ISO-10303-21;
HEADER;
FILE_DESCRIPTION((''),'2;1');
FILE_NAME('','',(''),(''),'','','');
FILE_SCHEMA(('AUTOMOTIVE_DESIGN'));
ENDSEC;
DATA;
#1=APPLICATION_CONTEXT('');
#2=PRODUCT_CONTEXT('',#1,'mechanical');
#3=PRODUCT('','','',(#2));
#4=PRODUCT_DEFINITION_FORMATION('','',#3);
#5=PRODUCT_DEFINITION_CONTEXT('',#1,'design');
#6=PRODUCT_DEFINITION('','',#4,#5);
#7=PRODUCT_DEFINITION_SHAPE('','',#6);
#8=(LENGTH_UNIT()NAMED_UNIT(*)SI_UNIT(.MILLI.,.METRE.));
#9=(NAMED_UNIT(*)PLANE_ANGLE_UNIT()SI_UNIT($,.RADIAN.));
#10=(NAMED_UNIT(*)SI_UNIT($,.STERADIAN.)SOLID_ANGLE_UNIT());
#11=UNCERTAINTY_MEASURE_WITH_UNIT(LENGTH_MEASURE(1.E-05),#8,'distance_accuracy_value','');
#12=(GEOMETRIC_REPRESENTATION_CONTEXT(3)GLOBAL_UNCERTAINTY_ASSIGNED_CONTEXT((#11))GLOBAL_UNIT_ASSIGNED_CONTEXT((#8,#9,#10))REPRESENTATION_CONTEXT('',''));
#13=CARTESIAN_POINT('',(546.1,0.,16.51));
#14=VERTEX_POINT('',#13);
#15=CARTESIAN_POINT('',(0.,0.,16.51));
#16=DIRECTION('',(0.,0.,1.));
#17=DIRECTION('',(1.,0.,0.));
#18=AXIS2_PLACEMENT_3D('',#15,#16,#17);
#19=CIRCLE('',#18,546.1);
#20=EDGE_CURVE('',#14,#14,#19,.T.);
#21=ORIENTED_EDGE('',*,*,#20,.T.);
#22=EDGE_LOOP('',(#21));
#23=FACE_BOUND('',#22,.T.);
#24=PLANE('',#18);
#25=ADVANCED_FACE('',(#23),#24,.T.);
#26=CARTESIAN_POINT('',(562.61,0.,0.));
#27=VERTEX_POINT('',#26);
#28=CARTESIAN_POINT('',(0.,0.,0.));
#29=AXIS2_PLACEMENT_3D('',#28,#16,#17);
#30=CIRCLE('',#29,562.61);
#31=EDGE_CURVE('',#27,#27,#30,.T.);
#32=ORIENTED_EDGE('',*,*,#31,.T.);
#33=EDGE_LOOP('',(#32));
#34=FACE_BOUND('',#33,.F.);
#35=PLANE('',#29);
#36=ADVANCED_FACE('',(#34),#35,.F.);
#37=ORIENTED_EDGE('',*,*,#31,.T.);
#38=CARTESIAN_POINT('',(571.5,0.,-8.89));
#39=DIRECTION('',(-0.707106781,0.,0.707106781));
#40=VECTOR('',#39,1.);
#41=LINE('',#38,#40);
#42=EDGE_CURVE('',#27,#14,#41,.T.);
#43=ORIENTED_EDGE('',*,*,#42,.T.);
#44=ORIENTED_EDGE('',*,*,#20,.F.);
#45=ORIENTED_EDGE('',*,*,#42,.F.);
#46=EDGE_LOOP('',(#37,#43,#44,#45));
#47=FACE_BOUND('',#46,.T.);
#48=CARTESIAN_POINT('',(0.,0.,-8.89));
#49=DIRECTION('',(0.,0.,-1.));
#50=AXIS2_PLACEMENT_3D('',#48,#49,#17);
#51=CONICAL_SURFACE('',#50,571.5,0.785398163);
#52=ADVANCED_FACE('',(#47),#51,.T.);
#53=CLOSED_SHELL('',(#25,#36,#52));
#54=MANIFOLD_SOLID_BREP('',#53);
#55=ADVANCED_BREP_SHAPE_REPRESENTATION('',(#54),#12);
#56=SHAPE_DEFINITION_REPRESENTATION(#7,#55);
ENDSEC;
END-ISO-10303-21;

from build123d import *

# Parameters (mm, degrees)
F0_R     = 571.5
F1_DEPTH = 12.7
F2_DEPTH = 3.81


# Not quite as in the source:
# - a fillet or chamfer that OpenCascade refuses, or shapes differently, is made with other operations: its cross-section is extruded or revolved along the edge and cut away or added


with BuildPart() as f1:
    # F0 (on Top) → F1 (new body)
    with BuildSketch(Plane.XY):
        Circle(F0_R)
    extrude(amount=F1_DEPTH)

    # F2 (add): a face of the model
    f2_faces = [f1.faces().sort_by_distance(p)[0] for p in [
        (0, 0, 12.7),
    ]]
    extrude(f2_faces, amount=F2_DEPTH)

    # F3: chamfer of 25.4 on 1 edges, made by hand

    # F3_s1 → F3_t2 (revolve, cut)
    with BuildSketch(Plane.XZ):
        Polygon((571.5, -8.89), (546.1, 16.51), (571.5, 16.51), align=None)
    revolve(axis=Axis((0, 0, 16.51), (0, 0, 1)), mode=Mode.SUBTRACT)


solid = f1.part
